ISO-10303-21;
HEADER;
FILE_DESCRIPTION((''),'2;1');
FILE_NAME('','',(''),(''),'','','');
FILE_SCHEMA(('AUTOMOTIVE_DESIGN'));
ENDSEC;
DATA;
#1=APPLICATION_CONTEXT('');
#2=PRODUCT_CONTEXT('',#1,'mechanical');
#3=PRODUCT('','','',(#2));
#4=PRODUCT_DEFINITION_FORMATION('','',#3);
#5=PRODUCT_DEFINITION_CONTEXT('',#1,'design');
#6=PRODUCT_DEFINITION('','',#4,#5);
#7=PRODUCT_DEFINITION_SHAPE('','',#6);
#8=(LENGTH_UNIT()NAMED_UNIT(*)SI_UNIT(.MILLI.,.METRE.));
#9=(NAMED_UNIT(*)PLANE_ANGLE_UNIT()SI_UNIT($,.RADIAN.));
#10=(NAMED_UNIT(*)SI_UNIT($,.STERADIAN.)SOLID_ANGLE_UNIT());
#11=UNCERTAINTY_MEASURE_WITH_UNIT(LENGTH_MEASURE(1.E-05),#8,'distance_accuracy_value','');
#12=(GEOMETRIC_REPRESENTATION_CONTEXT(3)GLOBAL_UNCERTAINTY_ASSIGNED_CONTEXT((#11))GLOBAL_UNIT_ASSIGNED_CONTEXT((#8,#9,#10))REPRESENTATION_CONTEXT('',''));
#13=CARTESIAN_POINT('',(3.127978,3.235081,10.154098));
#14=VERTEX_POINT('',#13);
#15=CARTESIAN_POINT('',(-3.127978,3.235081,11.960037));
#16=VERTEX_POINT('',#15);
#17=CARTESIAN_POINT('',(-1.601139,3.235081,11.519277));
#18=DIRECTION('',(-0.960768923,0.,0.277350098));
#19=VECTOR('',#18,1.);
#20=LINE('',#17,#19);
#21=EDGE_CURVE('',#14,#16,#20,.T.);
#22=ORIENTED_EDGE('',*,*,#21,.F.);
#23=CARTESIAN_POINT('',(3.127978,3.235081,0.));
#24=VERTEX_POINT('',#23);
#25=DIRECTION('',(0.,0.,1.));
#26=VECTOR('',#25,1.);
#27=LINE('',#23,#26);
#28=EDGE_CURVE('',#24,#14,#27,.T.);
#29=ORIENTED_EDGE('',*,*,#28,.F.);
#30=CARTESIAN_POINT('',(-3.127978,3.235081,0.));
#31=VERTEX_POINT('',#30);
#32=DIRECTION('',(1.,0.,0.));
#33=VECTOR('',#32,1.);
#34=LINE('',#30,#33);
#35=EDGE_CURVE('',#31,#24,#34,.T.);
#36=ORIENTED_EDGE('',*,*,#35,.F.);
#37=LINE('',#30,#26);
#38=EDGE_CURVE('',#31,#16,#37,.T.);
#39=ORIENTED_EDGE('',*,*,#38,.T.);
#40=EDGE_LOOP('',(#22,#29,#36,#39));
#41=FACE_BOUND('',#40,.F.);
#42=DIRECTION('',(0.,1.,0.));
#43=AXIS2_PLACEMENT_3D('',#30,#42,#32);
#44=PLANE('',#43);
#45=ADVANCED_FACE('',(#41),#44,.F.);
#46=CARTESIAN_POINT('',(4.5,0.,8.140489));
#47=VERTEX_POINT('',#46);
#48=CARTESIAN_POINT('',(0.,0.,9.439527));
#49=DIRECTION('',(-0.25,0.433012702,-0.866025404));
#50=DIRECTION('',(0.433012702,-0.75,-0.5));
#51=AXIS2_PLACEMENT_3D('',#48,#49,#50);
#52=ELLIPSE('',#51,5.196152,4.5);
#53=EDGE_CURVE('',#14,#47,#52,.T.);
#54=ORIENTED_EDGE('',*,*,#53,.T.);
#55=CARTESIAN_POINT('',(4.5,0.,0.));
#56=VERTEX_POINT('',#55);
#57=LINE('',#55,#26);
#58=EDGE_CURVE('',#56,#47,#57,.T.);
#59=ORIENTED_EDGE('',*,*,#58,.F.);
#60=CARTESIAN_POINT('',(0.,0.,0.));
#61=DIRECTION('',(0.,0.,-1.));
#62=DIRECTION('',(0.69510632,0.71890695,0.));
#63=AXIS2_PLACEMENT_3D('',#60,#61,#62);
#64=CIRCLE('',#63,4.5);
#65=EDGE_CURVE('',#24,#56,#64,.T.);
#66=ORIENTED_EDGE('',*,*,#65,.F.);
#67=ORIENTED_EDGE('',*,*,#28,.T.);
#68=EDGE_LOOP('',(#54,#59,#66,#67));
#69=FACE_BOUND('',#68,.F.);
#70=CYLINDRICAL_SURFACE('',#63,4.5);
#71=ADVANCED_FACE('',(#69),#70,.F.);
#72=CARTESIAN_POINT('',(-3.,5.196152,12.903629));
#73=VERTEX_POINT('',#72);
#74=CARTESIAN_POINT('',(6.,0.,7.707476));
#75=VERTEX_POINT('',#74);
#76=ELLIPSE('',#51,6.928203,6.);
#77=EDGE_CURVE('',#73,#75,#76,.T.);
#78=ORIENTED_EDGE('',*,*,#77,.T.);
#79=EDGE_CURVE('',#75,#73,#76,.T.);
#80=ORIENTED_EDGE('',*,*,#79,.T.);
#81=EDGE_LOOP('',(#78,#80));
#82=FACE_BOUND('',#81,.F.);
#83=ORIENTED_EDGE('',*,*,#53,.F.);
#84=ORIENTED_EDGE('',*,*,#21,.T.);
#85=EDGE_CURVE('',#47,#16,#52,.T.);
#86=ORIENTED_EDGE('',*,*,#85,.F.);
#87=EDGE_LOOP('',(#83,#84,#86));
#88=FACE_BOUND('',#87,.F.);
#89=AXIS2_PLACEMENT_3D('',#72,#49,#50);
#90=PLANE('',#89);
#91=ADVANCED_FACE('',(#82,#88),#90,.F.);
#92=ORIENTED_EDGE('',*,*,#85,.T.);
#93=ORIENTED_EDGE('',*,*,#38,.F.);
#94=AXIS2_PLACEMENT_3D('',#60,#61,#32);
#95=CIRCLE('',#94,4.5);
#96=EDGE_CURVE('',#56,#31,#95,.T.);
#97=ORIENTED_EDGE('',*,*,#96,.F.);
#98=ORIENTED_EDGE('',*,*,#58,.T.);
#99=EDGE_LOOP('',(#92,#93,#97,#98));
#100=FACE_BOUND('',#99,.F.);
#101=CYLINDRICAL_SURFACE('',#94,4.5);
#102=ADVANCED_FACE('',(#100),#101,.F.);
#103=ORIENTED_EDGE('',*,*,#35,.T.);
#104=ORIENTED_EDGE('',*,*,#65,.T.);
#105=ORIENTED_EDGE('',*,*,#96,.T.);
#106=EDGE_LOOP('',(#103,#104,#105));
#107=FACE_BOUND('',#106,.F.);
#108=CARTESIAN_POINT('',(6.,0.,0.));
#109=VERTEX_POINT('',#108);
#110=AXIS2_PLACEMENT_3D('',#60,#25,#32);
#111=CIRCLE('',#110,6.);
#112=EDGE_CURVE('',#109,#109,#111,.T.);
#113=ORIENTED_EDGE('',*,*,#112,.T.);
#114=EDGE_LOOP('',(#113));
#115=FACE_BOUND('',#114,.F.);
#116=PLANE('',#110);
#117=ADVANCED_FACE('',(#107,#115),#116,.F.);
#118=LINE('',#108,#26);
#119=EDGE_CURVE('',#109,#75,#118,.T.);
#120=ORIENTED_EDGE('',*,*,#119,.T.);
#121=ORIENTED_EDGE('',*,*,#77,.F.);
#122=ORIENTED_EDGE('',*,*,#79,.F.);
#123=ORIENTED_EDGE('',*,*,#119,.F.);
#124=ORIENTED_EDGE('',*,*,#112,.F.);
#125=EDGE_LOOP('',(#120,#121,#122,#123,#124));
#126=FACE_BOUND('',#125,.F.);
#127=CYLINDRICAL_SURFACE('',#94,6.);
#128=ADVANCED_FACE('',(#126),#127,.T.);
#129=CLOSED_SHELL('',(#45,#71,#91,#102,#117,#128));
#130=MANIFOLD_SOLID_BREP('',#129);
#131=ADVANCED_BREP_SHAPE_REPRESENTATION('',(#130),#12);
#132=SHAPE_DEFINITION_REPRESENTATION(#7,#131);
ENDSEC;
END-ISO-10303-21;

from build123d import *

# Parameters (mm, degrees)
F0_R     = 6
F1_DEPTH = 15
F6_DEPTH = 12.5


# Not quite as in the source:
# - the program builds the solid bodies; features that only make, move or delete a surface that nothing else refers to are left out


with BuildPart() as f1:
    # F0 (on Top) → F1 (new body)
    with BuildSketch(Plane.XY):
        Circle(F0_R)
        with BuildLine():
            ThreePointArc((3.1279784422, 3.2350812764), (4.1428192689, 1.7569998592), (4.5, 0))
            ThreePointArc((4.5, 0), (-1.7569998592, -4.1428192689), (-3.1279784422, 3.2350812764))
            ThreePointArc((-3.1279784422, 3.2350812764), (0, 4.5), (3.1279784422, 3.2350812764))
        make_face(mode=Mode.SUBTRACT)
        with BuildLine():
            Line((-3.1279784422, 3.2350812764), (3.1279784422, 3.2350812764))
            ThreePointArc((3.1279784422, 3.2350812764), (0, 4.5), (-3.1279784422, 3.2350812764))
        make_face()
    extrude(amount=F1_DEPTH)

    # F5 (on face) → F6 (cut, symmetric)
    with BuildSketch(Plane(origin=(0, 0, 0), x_dir=(0.5, -0.8660254038, 0), z_dir=(-0.8660254038, -0.5, 0))):
        Polygon((6.8078478798, 15), (-6, 15), (-6, 12.9036288413), (6.8078478798, 5.5090144201), align=None)
    extrude(amount=F6_DEPTH, both=True, mode=Mode.SUBTRACT)


solid = f1.part
